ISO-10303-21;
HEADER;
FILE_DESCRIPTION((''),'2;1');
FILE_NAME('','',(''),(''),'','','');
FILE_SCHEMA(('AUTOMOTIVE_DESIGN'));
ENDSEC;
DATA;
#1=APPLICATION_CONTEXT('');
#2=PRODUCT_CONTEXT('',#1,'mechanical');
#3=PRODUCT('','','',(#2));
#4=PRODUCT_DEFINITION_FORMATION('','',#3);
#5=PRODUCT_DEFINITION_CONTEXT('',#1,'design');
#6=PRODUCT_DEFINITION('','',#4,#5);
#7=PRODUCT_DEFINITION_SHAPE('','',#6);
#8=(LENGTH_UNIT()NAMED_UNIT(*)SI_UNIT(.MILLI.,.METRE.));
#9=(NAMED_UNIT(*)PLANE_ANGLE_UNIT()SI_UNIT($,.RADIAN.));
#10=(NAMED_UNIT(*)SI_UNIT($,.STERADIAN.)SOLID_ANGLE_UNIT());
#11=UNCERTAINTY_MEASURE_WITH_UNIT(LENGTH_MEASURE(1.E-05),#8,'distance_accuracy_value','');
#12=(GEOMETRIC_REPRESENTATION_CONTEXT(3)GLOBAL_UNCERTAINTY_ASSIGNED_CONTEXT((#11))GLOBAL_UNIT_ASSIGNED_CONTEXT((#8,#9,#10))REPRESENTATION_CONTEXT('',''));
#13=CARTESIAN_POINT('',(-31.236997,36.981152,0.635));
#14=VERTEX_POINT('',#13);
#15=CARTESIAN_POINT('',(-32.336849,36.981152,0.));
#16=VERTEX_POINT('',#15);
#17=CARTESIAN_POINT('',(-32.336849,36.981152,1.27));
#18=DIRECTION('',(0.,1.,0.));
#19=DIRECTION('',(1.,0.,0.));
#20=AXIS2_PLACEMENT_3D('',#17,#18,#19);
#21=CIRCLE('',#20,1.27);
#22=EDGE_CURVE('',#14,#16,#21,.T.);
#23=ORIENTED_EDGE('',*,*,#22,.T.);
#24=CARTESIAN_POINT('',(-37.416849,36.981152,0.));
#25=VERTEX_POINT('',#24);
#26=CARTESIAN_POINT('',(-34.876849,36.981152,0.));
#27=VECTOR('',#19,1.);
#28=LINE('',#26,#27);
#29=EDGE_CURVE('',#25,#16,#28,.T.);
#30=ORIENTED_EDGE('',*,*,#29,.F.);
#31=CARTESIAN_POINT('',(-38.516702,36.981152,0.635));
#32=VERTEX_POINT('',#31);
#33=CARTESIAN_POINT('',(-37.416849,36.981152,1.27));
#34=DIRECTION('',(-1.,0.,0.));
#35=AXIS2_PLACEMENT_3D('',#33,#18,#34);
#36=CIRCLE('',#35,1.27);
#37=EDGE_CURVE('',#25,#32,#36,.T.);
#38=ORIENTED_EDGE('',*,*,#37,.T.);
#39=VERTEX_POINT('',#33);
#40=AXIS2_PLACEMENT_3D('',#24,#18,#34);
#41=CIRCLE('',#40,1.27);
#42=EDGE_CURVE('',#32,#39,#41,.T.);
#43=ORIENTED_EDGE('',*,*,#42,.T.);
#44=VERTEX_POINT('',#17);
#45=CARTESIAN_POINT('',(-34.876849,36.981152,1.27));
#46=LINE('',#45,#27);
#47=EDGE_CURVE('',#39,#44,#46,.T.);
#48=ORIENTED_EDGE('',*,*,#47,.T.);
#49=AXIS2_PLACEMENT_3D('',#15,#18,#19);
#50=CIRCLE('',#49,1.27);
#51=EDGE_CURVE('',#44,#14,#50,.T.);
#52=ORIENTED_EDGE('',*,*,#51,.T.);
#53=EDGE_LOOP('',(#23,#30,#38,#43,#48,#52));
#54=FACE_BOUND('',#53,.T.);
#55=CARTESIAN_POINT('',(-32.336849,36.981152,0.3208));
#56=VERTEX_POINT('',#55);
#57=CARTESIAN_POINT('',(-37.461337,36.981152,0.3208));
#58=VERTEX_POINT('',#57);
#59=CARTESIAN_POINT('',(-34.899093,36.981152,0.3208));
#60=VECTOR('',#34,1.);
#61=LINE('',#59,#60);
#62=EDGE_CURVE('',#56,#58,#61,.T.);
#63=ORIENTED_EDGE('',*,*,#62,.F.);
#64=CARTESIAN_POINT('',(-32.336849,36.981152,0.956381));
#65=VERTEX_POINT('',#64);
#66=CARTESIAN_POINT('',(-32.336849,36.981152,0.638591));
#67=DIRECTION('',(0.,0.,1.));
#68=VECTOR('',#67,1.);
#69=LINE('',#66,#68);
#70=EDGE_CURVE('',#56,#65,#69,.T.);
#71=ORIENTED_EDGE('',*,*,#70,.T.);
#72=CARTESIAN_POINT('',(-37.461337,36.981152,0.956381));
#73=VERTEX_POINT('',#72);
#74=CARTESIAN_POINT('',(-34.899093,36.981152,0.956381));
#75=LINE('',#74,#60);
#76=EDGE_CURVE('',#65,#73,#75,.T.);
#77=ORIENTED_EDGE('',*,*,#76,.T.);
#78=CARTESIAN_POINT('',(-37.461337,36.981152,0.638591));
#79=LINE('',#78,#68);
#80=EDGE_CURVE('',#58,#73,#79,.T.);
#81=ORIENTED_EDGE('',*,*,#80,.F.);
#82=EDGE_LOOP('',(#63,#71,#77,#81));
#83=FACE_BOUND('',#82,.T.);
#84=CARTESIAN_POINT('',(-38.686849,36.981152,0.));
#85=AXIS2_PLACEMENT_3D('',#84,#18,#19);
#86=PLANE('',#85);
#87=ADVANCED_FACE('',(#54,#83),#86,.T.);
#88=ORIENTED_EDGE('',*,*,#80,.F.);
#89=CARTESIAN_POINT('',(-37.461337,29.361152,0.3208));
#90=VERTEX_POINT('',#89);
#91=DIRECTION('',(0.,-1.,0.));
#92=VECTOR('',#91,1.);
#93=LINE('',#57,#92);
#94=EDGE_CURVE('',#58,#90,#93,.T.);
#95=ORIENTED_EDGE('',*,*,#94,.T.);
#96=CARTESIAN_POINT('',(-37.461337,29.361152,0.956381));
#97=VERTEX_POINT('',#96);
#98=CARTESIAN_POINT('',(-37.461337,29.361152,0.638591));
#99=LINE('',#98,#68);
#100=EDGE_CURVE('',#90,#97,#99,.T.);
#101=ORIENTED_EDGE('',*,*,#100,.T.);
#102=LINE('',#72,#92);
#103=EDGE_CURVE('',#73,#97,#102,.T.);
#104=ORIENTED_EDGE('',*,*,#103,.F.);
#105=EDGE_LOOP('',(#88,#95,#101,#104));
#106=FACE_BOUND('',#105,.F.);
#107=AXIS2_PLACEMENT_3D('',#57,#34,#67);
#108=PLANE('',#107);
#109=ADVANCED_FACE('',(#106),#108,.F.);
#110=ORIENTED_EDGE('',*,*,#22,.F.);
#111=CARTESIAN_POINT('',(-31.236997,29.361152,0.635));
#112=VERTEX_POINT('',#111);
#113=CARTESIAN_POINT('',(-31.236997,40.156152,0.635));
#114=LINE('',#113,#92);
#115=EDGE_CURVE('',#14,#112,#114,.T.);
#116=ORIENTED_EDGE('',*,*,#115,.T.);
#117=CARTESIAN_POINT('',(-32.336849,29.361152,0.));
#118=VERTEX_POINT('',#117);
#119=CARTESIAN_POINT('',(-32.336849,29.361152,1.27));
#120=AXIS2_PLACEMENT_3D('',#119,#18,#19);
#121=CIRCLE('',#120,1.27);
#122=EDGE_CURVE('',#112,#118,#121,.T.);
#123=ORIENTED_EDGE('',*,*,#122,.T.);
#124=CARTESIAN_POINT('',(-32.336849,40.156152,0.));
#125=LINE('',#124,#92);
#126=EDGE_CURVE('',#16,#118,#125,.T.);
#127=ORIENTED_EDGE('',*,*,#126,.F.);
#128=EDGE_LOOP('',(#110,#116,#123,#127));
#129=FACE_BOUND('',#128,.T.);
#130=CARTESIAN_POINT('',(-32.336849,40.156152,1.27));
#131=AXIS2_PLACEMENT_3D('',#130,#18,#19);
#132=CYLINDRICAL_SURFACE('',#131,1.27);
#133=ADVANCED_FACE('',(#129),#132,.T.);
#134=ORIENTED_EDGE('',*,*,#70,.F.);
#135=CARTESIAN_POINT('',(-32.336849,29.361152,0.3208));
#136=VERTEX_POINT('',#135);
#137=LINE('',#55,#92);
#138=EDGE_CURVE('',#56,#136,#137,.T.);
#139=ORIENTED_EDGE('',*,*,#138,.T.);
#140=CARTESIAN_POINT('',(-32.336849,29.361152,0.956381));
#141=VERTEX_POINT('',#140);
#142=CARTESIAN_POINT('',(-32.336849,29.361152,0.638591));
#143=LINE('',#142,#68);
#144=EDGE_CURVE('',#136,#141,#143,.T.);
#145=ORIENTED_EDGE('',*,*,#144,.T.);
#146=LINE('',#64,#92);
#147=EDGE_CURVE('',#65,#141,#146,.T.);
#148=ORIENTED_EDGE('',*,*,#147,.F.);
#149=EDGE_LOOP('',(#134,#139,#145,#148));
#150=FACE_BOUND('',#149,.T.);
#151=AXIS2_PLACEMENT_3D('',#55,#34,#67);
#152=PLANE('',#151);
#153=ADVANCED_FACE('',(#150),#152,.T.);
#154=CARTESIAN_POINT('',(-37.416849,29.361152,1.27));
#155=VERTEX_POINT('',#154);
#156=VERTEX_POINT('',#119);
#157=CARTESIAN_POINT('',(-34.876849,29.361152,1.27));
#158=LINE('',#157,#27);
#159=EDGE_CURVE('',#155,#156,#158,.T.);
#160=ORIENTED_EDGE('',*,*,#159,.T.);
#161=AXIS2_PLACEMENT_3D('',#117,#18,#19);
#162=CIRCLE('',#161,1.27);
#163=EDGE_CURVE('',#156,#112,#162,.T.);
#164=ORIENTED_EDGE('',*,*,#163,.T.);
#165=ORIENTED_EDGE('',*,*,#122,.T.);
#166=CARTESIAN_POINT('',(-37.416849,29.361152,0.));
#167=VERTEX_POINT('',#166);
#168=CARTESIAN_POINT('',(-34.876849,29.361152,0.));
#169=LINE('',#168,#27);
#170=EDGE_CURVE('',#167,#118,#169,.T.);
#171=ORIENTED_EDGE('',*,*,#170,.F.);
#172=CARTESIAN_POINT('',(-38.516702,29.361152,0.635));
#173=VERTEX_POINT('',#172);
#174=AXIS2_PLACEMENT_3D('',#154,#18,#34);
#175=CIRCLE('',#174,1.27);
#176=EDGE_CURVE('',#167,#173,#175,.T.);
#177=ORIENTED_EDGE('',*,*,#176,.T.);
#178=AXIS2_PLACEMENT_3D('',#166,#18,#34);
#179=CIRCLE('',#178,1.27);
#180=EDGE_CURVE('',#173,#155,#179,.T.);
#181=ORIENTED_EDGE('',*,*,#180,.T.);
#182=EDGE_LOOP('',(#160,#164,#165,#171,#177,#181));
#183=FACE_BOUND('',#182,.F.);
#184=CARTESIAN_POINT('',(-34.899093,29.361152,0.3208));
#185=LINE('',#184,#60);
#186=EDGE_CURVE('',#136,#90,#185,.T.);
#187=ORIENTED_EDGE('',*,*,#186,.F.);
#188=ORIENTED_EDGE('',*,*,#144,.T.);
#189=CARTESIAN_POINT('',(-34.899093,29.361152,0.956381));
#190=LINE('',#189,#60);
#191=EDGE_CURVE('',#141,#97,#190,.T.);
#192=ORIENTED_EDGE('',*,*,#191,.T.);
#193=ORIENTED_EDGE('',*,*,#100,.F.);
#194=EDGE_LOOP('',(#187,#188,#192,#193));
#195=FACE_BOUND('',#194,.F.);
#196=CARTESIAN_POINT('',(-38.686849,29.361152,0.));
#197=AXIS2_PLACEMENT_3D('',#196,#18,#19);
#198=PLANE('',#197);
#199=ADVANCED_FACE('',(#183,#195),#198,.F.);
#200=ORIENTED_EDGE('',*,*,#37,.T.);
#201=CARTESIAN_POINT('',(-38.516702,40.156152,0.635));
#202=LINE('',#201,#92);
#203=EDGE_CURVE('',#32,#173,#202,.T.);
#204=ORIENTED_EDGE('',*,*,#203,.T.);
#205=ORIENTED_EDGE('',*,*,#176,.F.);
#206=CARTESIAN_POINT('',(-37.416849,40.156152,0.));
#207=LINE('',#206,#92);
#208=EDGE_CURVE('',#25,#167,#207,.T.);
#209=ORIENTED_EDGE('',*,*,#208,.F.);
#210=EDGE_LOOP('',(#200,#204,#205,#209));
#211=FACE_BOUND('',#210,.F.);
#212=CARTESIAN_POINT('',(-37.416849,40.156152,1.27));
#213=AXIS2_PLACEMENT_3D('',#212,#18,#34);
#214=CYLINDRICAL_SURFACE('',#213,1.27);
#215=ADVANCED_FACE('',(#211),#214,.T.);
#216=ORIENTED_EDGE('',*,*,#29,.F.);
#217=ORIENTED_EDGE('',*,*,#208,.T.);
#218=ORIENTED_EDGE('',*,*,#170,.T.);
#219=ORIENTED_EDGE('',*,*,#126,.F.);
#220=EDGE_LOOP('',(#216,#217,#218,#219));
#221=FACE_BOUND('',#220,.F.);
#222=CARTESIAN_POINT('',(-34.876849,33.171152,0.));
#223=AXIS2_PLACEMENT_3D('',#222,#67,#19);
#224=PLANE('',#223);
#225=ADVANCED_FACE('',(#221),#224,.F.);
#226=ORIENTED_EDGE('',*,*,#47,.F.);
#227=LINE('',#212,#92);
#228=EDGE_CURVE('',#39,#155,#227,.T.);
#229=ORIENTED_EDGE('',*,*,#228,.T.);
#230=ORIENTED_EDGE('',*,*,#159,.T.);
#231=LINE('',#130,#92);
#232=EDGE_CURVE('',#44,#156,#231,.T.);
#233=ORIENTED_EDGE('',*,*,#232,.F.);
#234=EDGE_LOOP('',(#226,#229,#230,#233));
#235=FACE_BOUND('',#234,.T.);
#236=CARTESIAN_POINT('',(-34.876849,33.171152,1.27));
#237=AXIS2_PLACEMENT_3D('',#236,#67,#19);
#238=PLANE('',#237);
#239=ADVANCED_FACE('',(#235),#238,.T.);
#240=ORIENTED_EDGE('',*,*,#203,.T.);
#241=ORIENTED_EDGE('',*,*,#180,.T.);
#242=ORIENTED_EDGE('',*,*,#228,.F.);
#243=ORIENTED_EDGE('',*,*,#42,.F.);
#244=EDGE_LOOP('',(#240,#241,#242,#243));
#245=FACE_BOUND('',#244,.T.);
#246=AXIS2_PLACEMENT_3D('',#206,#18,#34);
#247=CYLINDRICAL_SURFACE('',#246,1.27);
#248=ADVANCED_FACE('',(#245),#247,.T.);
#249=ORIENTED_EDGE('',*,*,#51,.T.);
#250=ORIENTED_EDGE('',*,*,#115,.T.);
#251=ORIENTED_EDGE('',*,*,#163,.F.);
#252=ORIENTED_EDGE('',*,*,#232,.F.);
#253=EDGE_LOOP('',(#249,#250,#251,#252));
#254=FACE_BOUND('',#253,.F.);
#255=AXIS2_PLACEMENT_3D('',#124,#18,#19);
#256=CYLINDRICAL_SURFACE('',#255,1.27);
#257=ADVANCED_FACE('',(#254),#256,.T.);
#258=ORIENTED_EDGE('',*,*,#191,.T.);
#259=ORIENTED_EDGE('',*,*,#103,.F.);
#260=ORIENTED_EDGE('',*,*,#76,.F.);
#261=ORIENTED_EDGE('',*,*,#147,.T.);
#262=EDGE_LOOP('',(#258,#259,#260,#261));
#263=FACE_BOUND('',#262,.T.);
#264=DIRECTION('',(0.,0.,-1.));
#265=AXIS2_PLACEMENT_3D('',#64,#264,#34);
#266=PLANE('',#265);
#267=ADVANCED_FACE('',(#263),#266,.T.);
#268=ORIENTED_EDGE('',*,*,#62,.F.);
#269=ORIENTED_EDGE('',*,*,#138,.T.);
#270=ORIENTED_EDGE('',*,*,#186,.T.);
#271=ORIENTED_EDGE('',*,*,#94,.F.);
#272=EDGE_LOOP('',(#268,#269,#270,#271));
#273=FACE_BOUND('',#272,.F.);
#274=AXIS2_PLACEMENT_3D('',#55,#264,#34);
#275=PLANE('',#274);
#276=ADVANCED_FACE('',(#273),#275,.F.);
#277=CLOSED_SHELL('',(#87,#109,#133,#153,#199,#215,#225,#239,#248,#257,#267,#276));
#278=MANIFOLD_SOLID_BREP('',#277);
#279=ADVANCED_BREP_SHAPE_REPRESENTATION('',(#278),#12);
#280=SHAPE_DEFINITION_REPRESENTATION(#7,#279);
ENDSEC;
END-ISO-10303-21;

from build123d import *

# Parameters (mm, degrees)
F0_W        = 7.62
F0_H        = 7.62
F1_DEPTH    = 1.27
F2_T1_DEPTH = 13.97
F3_W        = 5.1244873625
F3_H        = 0.6355810037
F4_DEPTH    = 7.62


# Not quite as in the source:
# - a fillet or chamfer that OpenCascade refuses, or shapes differently, is made with other operations: its cross-section is extruded or revolved along the edge and cut away or added


with BuildPart() as f1:
    # F0 (on Top) → F1 (new body)
    with BuildSketch(Plane.XY):
        with Locations((-34.8768493396, 33.171152453)):
            Rectangle(F0_W, F0_H)
    extrude(amount=F1_DEPTH)

    # F2: fillet of radius 1.27 on 4 edges, made by hand

    # F2_s2 → F2_t1 (cut)
    with BuildSketch(Plane.XZ.offset(-40.156152453)):
        with BuildLine():
            ThreePointArc((-38.6868493396, 0), (-38.3148749517, 0.8980256121), (-37.4168493396, 1.27))
            Line((-37.4168493396, 1.27), (-38.6868493396, 1.27))
            Line((-38.6868493396, 1.27), (-38.6868493396, 0))
        make_face()
        with BuildLine():
            ThreePointArc((-31.0668493396, 0), (-31.4388237275, 0.8980256121), (-32.3368493396, 1.27))
            Line((-32.3368493396, 1.27), (-31.0668493396, 1.27))
            Line((-31.0668493396, 1.27), (-31.0668493396, 0))
        make_face()
        with BuildLine():
            ThreePointArc((-38.6868493396, 1.27), (-38.3148749517, 0.3719743879), (-37.4168493396, 0))
            Line((-37.4168493396, 0), (-38.6868493396, 0))
            Line((-38.6868493396, 0), (-38.6868493396, 1.27))
        make_face()
        with BuildLine():
            ThreePointArc((-31.0668493396, 1.27), (-31.4388237275, 0.3719743879), (-32.3368493396, 0))
            Line((-32.3368493396, 0), (-31.0668493396, 0))
            Line((-31.0668493396, 0), (-31.0668493396, 1.27))
        make_face()
    extrude(amount=F2_T1_DEPTH, mode=Mode.SUBTRACT)

    # F3 (on face) → F4 (cut)
    with BuildSketch(Plane(origin=(0, 36.981152453, 0), x_dir=(-1, 0, 0), z_dir=(0, 1, 0))):
        with Locations((34.8990930209, 0.6385907036)):
            Rectangle(F3_W, F3_H)
    extrude(amount=-F4_DEPTH, mode=Mode.SUBTRACT)


solid = f1.part
